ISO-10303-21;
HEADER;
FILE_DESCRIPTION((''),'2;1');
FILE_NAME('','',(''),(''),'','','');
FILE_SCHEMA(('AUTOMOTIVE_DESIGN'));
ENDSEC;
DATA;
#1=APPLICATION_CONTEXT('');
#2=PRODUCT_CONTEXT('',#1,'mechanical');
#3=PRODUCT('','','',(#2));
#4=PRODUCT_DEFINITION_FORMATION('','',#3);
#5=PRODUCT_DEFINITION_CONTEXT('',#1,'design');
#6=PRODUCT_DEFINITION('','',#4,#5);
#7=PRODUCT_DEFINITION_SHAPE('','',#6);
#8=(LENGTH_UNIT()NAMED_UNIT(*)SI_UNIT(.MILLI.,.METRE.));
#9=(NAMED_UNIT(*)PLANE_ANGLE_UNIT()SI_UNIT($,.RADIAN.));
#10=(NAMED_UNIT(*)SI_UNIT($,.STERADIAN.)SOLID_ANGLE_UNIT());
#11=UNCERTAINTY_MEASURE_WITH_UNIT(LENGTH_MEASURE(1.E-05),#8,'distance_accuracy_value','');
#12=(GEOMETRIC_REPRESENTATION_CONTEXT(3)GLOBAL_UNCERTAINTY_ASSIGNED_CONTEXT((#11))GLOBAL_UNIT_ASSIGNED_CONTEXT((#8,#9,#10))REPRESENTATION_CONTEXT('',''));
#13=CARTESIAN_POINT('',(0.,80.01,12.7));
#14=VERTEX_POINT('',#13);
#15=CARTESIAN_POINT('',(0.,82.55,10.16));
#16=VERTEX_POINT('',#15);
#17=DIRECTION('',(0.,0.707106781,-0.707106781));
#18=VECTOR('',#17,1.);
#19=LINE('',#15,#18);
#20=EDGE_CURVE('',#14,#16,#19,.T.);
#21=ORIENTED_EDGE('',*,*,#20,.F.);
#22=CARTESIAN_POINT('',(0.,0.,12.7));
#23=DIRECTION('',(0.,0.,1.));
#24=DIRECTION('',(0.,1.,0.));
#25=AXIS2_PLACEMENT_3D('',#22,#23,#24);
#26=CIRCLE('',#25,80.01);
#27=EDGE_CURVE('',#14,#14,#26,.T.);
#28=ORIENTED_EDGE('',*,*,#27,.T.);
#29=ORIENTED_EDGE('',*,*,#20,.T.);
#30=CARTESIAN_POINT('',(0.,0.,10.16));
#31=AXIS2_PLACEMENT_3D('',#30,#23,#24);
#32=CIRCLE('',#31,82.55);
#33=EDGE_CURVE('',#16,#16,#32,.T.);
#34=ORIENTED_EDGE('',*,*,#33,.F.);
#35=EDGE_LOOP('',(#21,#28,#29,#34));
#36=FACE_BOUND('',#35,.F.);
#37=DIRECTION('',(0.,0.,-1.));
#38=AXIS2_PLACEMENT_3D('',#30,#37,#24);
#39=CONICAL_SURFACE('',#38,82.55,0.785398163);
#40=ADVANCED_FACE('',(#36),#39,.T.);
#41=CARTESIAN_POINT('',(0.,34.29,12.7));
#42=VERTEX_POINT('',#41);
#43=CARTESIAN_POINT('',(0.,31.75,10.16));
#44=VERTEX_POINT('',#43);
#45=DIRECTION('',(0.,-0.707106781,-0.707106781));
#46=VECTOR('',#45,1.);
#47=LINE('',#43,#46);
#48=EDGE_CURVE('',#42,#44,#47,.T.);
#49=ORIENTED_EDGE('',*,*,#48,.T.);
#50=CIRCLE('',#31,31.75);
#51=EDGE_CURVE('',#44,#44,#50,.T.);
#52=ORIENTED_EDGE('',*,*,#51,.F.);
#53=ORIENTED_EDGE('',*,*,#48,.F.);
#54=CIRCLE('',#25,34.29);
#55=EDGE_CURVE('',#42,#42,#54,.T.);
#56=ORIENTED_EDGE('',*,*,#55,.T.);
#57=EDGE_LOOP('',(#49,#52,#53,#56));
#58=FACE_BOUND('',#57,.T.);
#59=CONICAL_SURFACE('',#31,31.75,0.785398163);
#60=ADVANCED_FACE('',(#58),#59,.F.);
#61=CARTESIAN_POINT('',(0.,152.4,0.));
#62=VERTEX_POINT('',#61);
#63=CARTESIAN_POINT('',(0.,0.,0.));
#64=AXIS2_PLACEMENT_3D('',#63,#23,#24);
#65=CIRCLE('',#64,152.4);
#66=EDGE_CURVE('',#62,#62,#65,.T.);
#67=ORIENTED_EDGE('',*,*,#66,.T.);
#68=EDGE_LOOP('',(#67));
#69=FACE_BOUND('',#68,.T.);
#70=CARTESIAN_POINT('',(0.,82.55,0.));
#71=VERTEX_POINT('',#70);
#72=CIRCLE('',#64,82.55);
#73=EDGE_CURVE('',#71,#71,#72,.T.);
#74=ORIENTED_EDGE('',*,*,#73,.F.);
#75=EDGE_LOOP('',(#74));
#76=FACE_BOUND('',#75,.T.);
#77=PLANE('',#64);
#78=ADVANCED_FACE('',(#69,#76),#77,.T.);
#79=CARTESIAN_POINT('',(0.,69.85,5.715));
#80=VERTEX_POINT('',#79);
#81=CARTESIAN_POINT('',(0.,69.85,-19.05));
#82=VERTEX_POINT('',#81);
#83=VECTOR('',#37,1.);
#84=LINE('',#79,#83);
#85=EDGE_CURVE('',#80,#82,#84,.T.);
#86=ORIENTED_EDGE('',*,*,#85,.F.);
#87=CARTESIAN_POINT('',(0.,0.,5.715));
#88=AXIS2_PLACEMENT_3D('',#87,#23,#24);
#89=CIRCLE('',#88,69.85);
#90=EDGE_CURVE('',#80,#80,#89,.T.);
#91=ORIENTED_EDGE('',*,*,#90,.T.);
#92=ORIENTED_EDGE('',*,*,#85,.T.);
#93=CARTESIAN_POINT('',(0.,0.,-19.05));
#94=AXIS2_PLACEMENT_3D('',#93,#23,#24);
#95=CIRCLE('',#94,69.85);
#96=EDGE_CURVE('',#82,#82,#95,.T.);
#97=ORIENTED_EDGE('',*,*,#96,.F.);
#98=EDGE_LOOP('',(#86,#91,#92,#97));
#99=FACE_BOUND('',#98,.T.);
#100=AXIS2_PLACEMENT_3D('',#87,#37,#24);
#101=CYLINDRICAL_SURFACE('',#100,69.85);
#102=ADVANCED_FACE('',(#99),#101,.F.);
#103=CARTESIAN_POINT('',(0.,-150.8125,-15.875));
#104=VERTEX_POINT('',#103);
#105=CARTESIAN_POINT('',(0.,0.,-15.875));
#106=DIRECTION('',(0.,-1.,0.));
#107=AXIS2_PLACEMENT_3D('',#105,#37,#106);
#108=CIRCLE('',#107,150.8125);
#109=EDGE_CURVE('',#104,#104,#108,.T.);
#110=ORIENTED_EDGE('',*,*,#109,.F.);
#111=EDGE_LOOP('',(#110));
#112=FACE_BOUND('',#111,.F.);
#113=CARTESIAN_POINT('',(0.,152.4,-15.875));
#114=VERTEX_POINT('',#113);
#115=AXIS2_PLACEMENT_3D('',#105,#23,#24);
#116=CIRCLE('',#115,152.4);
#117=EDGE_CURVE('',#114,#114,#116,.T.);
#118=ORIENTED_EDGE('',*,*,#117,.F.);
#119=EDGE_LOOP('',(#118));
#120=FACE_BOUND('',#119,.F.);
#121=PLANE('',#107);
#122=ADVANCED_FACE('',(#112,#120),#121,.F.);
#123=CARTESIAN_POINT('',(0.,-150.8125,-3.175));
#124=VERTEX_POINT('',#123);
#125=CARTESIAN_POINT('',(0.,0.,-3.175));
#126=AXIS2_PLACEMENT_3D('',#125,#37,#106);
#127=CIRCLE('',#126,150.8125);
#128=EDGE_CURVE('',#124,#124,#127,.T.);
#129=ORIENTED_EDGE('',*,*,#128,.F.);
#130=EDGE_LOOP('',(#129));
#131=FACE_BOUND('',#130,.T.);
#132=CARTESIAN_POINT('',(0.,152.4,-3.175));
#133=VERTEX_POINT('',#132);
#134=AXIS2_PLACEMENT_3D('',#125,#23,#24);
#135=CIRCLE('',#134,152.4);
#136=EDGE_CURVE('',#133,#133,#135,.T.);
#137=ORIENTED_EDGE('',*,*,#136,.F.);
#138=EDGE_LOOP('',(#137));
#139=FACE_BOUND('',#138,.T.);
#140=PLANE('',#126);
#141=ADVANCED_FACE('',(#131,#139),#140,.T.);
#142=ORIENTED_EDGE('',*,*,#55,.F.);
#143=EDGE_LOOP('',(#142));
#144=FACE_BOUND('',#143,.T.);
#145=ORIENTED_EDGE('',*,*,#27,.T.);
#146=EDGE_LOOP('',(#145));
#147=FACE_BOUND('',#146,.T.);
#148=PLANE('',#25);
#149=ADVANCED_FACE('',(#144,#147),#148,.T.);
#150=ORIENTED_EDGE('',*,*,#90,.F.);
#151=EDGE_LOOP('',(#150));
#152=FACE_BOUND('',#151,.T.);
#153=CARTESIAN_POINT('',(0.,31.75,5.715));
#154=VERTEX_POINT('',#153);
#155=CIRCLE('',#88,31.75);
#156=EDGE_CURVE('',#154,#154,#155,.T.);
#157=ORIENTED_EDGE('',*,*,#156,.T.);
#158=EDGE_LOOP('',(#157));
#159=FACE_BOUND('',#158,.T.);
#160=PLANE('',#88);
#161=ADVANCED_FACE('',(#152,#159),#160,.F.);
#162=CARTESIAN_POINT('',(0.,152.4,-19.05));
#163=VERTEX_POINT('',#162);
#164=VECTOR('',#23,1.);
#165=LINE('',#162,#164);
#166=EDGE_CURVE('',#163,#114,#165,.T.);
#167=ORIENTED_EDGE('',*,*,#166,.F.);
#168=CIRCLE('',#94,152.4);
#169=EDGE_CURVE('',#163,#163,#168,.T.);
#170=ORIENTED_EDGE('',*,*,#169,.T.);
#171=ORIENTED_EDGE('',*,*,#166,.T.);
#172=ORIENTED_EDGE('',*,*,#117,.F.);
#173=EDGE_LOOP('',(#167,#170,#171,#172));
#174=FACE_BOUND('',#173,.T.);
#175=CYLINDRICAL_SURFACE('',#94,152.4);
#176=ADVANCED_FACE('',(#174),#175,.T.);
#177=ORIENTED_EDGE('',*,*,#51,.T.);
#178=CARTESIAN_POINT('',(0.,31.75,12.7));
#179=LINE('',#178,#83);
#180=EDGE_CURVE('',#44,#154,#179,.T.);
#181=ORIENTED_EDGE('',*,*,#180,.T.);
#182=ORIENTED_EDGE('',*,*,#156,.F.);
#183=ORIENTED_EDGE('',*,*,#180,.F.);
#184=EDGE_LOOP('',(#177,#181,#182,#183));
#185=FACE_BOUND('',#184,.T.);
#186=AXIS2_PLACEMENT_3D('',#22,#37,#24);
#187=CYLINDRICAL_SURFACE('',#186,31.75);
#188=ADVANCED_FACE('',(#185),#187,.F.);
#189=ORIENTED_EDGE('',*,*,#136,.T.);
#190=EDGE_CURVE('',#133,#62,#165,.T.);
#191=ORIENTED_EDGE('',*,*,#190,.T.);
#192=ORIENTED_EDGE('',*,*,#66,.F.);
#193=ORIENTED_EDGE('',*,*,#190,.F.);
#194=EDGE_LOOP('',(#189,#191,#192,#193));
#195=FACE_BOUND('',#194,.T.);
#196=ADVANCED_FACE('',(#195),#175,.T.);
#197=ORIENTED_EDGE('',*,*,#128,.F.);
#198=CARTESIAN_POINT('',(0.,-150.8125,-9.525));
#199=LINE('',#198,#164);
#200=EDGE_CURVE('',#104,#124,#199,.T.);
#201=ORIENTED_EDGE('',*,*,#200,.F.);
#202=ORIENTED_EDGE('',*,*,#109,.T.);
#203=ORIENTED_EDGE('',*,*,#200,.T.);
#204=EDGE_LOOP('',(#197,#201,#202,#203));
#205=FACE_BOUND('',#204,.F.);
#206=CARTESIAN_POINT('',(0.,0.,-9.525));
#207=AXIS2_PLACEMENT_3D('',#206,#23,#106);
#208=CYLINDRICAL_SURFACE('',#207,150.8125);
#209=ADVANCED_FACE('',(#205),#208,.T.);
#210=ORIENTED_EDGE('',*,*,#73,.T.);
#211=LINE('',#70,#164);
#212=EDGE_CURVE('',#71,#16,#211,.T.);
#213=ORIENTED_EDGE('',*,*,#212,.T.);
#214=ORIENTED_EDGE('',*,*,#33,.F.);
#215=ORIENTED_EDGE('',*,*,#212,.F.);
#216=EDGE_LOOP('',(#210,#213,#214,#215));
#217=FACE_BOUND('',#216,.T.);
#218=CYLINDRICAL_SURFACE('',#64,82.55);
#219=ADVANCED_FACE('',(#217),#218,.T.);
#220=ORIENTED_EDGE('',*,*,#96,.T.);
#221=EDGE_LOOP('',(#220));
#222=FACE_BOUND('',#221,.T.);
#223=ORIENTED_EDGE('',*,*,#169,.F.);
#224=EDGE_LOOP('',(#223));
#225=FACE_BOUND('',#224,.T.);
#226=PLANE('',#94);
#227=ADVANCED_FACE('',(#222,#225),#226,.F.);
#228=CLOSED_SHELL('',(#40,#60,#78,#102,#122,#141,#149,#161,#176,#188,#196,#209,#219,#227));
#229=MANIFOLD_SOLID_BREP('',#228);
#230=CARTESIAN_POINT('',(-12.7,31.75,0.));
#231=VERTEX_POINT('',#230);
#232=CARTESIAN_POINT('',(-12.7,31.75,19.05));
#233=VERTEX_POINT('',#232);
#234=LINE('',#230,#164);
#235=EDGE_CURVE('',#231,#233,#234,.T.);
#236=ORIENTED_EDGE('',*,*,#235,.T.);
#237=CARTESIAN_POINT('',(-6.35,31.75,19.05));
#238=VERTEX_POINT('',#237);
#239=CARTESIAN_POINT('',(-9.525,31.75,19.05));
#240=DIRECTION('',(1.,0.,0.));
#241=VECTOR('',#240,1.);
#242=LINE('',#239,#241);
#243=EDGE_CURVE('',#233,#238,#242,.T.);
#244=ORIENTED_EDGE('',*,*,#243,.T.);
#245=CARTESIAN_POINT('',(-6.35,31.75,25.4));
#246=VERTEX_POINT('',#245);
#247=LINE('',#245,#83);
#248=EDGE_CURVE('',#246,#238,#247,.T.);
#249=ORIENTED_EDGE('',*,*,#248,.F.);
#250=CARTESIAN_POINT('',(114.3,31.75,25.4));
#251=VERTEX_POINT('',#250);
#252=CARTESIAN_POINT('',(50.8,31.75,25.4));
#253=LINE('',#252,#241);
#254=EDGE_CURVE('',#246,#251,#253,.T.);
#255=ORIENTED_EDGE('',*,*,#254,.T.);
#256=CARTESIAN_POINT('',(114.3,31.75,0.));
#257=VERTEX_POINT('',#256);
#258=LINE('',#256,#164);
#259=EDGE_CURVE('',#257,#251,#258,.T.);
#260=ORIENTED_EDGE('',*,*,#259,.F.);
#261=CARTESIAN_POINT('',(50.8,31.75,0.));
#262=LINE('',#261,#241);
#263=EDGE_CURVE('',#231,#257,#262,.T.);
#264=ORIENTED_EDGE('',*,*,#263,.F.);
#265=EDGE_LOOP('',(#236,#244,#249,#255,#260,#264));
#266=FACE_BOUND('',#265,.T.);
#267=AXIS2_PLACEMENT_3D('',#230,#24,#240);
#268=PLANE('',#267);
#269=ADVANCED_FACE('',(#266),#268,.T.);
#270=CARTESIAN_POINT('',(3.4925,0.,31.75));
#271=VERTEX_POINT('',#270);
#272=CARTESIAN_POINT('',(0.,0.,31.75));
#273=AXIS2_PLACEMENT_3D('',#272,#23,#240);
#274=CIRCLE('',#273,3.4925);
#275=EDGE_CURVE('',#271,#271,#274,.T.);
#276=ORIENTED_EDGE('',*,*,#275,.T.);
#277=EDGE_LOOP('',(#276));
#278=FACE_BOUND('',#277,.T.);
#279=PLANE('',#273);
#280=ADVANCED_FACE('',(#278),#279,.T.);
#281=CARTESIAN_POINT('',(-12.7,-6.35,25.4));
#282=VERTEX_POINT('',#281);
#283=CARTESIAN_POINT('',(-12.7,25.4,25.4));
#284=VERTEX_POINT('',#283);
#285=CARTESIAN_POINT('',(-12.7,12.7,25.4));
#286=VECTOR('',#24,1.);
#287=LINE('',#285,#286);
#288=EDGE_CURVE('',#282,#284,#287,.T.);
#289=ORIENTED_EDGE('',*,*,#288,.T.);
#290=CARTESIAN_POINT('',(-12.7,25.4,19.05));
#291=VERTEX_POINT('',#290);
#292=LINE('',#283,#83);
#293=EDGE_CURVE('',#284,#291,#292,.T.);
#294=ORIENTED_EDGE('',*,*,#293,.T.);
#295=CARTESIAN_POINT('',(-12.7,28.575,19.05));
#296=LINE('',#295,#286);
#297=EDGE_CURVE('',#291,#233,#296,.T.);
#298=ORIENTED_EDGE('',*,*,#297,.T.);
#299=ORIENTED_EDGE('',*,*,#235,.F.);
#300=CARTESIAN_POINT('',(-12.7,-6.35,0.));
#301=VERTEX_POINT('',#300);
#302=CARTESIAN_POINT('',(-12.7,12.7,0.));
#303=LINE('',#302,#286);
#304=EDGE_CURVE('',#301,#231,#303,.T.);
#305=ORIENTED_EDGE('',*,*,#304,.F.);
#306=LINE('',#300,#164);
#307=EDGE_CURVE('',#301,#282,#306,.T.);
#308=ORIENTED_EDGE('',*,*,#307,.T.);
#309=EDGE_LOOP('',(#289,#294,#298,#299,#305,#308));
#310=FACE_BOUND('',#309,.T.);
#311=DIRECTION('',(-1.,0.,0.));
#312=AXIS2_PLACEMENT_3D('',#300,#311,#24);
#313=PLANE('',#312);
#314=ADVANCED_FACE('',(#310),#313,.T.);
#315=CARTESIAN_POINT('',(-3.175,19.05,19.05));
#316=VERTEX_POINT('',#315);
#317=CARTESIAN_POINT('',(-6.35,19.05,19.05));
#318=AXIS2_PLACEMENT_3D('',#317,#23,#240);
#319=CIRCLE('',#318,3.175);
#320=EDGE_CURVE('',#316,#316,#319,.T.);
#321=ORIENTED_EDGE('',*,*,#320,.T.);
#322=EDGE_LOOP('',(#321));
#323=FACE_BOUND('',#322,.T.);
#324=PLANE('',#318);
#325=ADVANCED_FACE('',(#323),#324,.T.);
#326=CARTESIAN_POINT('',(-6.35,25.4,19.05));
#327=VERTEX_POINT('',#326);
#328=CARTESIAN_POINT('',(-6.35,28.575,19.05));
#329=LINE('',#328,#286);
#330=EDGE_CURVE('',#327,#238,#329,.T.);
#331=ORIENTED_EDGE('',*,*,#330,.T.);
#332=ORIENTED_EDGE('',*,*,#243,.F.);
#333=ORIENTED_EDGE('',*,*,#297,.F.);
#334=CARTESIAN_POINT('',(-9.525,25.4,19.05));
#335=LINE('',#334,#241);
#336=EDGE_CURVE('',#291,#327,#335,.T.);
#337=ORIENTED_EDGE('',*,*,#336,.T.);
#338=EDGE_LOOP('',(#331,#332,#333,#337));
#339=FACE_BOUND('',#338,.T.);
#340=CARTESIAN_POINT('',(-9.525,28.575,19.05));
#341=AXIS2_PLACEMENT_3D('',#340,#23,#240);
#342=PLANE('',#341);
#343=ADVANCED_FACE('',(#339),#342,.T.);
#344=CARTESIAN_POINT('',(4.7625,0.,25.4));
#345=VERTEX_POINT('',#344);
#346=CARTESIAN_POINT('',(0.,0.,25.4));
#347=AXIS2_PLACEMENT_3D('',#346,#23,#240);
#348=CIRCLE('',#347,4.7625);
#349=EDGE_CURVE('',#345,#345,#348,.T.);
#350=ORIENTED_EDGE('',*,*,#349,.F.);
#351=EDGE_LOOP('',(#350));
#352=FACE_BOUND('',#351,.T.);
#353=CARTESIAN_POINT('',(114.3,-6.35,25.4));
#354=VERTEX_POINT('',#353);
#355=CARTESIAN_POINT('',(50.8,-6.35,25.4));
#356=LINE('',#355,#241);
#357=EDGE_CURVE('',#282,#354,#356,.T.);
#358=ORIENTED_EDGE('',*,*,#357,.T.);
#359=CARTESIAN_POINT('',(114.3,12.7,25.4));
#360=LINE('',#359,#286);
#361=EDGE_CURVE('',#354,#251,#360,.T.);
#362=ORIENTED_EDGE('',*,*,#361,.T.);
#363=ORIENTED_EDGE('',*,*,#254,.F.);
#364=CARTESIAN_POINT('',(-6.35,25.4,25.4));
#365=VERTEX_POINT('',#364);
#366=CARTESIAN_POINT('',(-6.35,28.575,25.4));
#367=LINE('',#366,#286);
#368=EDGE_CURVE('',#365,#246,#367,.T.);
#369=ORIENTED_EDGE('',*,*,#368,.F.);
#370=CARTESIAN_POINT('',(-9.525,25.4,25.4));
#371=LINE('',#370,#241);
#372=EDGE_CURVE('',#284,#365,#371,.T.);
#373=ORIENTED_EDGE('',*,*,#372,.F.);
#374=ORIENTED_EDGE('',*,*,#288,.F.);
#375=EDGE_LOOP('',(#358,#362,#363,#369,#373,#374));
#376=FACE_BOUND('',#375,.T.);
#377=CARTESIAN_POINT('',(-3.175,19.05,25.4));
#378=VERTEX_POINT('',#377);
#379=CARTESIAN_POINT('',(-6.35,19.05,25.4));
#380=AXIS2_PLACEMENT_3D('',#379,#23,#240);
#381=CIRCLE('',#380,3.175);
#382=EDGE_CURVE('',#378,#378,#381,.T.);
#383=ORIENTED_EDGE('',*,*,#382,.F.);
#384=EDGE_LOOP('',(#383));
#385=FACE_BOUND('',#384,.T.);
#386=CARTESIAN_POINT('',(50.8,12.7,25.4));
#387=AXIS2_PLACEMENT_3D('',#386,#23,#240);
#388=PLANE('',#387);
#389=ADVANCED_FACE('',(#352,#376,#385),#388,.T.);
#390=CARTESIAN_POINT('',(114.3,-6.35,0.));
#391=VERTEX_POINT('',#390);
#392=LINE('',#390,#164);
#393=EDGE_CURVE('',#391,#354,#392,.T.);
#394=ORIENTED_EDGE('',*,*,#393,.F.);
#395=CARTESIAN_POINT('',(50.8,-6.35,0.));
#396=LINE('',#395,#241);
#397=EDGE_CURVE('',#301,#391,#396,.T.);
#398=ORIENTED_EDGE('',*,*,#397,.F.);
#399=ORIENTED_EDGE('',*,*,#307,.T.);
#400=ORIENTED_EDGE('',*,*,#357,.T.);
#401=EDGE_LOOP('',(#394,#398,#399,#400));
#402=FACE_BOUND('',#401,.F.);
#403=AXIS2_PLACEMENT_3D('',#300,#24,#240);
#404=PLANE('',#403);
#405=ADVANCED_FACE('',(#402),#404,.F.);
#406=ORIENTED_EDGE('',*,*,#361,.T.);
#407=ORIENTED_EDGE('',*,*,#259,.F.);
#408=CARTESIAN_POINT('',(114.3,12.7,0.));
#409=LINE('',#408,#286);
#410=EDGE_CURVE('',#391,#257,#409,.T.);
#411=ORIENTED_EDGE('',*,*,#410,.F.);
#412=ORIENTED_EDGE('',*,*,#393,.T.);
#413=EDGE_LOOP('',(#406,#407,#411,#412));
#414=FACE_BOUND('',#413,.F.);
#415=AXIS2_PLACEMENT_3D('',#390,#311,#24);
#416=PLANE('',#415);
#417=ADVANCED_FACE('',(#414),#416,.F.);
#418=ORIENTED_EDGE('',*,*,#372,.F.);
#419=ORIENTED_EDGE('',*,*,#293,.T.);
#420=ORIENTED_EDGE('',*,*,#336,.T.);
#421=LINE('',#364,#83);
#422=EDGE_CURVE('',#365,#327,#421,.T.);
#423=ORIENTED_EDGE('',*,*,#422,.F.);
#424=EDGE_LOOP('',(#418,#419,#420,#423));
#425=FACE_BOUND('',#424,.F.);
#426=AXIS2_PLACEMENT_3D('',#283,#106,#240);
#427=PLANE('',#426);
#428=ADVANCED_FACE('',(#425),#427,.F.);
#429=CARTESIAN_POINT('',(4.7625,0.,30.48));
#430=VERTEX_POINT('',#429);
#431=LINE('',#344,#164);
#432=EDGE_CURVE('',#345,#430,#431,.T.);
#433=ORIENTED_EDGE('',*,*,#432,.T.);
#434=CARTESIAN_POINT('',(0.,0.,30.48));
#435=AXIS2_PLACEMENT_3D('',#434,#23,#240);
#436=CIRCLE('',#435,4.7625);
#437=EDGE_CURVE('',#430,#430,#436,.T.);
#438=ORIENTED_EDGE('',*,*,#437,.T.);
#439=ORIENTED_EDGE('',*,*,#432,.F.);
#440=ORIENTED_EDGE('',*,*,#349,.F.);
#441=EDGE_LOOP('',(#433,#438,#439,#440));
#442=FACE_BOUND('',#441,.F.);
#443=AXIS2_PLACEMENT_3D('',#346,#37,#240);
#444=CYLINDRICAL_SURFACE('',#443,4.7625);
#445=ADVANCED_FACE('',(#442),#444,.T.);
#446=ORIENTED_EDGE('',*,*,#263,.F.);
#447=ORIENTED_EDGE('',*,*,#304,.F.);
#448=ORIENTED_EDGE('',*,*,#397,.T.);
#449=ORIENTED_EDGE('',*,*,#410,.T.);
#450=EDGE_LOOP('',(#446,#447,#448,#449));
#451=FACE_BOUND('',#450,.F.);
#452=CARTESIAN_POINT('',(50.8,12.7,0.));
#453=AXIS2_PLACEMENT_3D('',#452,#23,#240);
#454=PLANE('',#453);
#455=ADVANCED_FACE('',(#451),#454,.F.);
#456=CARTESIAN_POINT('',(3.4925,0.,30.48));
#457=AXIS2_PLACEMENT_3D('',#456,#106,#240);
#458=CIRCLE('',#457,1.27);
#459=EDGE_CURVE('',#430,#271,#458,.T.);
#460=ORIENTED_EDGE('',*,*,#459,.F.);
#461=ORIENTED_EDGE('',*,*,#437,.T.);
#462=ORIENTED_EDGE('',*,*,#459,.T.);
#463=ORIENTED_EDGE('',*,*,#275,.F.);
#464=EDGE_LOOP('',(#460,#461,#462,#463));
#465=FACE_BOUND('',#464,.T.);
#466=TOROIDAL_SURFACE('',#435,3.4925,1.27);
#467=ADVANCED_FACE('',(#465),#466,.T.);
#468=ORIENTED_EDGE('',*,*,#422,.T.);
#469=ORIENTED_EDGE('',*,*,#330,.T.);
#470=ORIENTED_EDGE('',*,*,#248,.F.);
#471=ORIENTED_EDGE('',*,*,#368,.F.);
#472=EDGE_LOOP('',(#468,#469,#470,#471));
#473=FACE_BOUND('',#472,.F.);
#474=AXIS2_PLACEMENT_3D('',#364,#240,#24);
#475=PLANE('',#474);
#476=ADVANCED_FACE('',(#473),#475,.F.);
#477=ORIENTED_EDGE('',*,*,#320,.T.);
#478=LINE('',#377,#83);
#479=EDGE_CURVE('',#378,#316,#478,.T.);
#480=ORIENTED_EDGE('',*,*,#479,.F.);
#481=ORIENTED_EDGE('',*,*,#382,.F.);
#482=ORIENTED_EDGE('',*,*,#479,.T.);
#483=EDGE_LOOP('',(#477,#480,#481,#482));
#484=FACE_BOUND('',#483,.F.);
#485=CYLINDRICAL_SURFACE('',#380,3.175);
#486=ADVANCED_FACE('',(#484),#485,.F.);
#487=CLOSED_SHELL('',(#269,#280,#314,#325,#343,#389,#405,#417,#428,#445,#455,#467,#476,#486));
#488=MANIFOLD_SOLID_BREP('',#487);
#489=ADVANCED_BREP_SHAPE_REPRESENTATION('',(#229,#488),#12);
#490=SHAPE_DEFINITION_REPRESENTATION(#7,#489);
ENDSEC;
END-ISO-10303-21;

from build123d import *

# Parameters (mm, degrees)
F2_SIZE   = 2.54
F3_W      = 127
F3_H      = 38.1
F4_DEPTH  = 25.4
F5_R      = 4.7625
F6_DEPTH  = 6.35
F7_W      = 6.35
F7_H      = 6.35
F8_DEPTH  = 6.35
F9_R      = 3.175
F10_DEPTH = 6.35
F11_R     = 1.27
F13_W     = 3.175
F13_H     = 12.7


# Not quite as in the source:
# - a feature names something its author has since deleted; it is built from what else it names


with BuildPart() as f1:
    # F0 (on Right) → F1 (revolve)
    with BuildSketch(Plane.YZ):
        Polygon((82.55, 12.7), (31.75, 12.7), (31.75, 5.715), (69.85, 5.715), (69.85, -19.05), (152.4, -19.05), (152.4, 0), (82.55, 0), align=None)
    revolve(axis=Axis((0, 0, 6.35), (0, 0, 1)))

    # F2
    f2_edges = [f1.edges().sort_by_distance(p)[0] for p in [
        (0, -31.75, 12.7),
        (0, -82.55, 12.7),
    ]]
    chamfer(f2_edges, length=F2_SIZE)

    # F13 (on Right) → F14 (revolve, cut)
    with BuildSketch(Plane.YZ):
        with Locations((-152.4, -9.525)):
            Rectangle(F13_W, F13_H)
    revolve(axis=Axis((0, 0, -9.525), (0, 0, -1)), mode=Mode.SUBTRACT)


with BuildPart() as f4:
    # F3 (on Top) → F4 (new body)
    with BuildSketch(Plane.XY):
        with Locations((50.8, 12.7)):
            Rectangle(F3_W, F3_H)
    extrude(amount=F4_DEPTH)

    # F5 (on face) → F6 (join)
    with BuildSketch(Plane.XY.offset(25.4)):
        Circle(F5_R)
    extrude(amount=F6_DEPTH)

    # F7 (on face) → F8 (cut)
    with BuildSketch(Plane.XY.offset(25.4)):
        with Locations((-9.525, 28.575)):
            Rectangle(F7_W, F7_H)
    extrude(amount=-F8_DEPTH, mode=Mode.SUBTRACT)

    # F9 (on face) → F10 (cut)
    with BuildSketch(Plane.XY.offset(25.4)):
        with Locations((-6.35, 19.05)):
            Circle(F9_R)
    extrude(amount=-F10_DEPTH, mode=Mode.SUBTRACT)

    # F11
    f11_edges = [f4.edges().sort_by_distance(p)[0] for p in [
        (-4.7625, 0, 31.75),
    ]]
    fillet(f11_edges, radius=F11_R)


solid = Compound([f1.part, f4.part])
